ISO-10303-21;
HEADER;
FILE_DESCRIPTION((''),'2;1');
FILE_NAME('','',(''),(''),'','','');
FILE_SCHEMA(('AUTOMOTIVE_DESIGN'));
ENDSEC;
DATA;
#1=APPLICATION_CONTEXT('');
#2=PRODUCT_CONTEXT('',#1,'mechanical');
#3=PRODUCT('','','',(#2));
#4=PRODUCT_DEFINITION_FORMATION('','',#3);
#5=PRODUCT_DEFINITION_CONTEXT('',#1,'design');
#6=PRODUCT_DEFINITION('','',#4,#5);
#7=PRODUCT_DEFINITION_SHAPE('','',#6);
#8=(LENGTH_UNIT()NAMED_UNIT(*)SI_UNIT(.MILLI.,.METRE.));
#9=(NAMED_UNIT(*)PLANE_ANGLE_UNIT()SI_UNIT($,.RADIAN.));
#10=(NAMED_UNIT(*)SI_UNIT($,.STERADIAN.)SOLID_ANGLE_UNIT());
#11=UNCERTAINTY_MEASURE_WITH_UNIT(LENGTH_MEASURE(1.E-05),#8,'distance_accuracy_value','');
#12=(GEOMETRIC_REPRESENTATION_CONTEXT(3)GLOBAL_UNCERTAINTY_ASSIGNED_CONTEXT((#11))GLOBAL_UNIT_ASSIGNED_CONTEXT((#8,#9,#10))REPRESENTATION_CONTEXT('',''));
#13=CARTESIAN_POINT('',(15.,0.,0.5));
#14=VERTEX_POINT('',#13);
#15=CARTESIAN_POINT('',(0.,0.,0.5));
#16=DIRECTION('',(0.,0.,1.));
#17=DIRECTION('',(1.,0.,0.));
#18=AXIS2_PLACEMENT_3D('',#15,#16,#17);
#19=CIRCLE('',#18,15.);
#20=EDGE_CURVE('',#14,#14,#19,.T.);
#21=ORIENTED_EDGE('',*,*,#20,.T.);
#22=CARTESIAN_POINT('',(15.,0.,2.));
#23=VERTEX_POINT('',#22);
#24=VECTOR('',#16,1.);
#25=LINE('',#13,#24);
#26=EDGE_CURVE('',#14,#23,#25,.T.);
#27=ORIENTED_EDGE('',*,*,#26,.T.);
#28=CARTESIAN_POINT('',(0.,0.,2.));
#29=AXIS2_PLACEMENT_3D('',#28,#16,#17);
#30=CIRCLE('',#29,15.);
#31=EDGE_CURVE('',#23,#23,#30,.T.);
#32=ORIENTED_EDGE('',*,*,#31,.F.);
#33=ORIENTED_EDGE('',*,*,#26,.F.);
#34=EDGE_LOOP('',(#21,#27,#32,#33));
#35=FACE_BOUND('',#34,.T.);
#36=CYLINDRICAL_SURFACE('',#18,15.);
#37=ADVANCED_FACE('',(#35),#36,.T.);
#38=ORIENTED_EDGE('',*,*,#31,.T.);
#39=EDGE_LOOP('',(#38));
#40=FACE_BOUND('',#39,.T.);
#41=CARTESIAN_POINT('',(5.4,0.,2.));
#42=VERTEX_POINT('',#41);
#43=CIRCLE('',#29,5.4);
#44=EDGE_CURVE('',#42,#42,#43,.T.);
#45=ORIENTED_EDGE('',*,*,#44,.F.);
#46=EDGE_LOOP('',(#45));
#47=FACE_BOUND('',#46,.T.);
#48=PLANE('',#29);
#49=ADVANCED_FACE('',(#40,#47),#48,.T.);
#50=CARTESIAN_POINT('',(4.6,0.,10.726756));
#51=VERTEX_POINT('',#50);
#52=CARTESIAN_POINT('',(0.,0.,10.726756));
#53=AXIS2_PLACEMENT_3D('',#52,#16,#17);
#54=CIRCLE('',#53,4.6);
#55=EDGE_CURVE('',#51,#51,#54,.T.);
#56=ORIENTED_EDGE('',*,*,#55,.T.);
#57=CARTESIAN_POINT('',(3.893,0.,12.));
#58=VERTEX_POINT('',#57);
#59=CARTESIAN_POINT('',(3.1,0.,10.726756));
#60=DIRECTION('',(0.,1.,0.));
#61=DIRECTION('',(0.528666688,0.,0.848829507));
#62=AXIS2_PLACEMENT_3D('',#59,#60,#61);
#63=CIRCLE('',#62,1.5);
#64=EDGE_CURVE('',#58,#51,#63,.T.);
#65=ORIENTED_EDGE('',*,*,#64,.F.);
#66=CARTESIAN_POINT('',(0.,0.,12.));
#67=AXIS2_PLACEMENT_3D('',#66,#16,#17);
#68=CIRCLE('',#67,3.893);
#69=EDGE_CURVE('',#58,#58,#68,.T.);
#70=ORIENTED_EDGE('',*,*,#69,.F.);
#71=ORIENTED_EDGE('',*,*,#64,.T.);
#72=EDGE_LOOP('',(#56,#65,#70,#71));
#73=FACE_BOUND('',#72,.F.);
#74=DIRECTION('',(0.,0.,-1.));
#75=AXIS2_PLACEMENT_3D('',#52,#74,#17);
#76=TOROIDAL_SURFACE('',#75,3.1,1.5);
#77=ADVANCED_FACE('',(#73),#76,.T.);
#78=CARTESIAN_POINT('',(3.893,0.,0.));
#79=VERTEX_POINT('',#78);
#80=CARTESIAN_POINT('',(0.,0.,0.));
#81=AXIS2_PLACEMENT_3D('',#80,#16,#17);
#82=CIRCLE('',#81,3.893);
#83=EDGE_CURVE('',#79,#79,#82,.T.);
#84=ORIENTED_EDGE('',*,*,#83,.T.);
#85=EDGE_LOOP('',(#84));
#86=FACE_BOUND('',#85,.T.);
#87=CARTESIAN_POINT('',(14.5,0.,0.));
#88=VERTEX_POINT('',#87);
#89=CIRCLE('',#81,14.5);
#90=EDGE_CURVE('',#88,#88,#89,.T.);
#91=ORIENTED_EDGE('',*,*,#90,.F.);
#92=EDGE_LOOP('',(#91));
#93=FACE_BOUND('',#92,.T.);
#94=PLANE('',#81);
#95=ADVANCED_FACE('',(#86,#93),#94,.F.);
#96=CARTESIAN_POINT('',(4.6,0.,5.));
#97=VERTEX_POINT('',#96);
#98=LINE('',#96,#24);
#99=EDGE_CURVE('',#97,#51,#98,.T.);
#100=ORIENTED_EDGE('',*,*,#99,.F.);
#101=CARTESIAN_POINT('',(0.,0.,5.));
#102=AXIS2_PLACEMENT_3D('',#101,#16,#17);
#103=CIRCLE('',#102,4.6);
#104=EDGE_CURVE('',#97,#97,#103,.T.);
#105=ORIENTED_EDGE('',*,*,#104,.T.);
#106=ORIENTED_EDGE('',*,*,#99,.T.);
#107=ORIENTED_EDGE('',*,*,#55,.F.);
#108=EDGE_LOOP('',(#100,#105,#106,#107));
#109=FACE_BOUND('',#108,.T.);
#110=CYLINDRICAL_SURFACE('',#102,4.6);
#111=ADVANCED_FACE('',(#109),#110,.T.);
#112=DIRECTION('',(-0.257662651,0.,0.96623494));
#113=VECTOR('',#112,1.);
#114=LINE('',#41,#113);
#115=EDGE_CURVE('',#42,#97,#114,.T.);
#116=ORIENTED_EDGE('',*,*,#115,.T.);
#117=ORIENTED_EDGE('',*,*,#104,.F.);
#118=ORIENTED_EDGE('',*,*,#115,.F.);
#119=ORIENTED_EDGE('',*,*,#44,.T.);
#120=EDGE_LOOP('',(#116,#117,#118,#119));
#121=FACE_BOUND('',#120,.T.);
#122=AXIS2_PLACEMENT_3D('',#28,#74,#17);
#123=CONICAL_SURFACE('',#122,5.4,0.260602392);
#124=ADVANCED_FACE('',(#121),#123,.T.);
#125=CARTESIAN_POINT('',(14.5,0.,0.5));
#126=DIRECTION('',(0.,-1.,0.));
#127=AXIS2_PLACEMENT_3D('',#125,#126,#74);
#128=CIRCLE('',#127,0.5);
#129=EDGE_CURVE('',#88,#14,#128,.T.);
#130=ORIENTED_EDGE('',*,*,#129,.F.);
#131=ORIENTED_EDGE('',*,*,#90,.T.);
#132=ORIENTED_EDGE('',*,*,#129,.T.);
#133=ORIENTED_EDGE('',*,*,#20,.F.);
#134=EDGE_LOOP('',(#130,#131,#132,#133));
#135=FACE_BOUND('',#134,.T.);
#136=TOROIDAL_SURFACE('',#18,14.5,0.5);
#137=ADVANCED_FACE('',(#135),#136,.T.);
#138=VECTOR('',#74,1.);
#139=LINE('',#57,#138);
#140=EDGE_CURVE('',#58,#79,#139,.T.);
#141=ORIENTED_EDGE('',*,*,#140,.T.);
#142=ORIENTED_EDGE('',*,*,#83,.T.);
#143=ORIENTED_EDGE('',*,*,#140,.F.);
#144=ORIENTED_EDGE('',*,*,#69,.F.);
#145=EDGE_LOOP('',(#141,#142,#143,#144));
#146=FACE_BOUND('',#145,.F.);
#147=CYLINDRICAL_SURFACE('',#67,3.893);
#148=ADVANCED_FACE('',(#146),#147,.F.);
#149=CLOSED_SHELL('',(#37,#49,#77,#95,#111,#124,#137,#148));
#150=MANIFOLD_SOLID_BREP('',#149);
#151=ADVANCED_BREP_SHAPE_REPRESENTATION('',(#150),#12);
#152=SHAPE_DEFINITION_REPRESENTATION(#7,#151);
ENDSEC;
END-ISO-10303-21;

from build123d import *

# Parameters (mm, degrees)
F3_R     = 3.8930000325
F4_DEPTH = 12.001


# Not quite as in the source:
# - a fillet or chamfer that OpenCascade refuses, or shapes differently, is made with other operations: its cross-section is extruded or revolved along the edge and cut away or added


with BuildPart() as f1:
    # F0 (on Front) → F1 (revolve)
    with BuildSketch(Plane.XZ):
        with BuildLine():
            Line((0, 12), (0, 0))
            Line((0, 0), (14.5, 0))
            ThreePointArc((14.5, 0), (14.8535533906, 0.1464466094), (15, 0.5))
            Line((15, 0.5), (15, 2))
            Line((15, 2), (5.4, 2))
            Line((5.4, 2), (4.6, 5))
            Line((4.6, 5), (4.6, 12))
            Line((4.6, 12), (0, 12))
        make_face()
    revolve(axis=Axis((0, 0, 6), (0, 0, 1)))

    # F3 (on face) → F4 (cut, through all)
    with BuildSketch(Plane.XY.offset(12)):
        Circle(F3_R)
    extrude(amount=-F4_DEPTH, mode=Mode.SUBTRACT)

    # F5: fillet of radius 1.5 on 1 edges, made by hand

    # F5_s1 → F5_t2 (revolve, cut)
    with BuildSketch(Plane.XZ):
        with BuildLine():
            ThreePointArc((3.8930000325, 12), (4.4113923991, 11.4549383915), (4.6, 10.7267557389))
            Line((4.6, 10.7267557389), (4.6, 12))
            Line((4.6, 12), (3.8930000325, 12))
        make_face()
    revolve(axis=Axis((0, 0, 12), (0, 0, 1)), mode=Mode.SUBTRACT)


solid = f1.part
